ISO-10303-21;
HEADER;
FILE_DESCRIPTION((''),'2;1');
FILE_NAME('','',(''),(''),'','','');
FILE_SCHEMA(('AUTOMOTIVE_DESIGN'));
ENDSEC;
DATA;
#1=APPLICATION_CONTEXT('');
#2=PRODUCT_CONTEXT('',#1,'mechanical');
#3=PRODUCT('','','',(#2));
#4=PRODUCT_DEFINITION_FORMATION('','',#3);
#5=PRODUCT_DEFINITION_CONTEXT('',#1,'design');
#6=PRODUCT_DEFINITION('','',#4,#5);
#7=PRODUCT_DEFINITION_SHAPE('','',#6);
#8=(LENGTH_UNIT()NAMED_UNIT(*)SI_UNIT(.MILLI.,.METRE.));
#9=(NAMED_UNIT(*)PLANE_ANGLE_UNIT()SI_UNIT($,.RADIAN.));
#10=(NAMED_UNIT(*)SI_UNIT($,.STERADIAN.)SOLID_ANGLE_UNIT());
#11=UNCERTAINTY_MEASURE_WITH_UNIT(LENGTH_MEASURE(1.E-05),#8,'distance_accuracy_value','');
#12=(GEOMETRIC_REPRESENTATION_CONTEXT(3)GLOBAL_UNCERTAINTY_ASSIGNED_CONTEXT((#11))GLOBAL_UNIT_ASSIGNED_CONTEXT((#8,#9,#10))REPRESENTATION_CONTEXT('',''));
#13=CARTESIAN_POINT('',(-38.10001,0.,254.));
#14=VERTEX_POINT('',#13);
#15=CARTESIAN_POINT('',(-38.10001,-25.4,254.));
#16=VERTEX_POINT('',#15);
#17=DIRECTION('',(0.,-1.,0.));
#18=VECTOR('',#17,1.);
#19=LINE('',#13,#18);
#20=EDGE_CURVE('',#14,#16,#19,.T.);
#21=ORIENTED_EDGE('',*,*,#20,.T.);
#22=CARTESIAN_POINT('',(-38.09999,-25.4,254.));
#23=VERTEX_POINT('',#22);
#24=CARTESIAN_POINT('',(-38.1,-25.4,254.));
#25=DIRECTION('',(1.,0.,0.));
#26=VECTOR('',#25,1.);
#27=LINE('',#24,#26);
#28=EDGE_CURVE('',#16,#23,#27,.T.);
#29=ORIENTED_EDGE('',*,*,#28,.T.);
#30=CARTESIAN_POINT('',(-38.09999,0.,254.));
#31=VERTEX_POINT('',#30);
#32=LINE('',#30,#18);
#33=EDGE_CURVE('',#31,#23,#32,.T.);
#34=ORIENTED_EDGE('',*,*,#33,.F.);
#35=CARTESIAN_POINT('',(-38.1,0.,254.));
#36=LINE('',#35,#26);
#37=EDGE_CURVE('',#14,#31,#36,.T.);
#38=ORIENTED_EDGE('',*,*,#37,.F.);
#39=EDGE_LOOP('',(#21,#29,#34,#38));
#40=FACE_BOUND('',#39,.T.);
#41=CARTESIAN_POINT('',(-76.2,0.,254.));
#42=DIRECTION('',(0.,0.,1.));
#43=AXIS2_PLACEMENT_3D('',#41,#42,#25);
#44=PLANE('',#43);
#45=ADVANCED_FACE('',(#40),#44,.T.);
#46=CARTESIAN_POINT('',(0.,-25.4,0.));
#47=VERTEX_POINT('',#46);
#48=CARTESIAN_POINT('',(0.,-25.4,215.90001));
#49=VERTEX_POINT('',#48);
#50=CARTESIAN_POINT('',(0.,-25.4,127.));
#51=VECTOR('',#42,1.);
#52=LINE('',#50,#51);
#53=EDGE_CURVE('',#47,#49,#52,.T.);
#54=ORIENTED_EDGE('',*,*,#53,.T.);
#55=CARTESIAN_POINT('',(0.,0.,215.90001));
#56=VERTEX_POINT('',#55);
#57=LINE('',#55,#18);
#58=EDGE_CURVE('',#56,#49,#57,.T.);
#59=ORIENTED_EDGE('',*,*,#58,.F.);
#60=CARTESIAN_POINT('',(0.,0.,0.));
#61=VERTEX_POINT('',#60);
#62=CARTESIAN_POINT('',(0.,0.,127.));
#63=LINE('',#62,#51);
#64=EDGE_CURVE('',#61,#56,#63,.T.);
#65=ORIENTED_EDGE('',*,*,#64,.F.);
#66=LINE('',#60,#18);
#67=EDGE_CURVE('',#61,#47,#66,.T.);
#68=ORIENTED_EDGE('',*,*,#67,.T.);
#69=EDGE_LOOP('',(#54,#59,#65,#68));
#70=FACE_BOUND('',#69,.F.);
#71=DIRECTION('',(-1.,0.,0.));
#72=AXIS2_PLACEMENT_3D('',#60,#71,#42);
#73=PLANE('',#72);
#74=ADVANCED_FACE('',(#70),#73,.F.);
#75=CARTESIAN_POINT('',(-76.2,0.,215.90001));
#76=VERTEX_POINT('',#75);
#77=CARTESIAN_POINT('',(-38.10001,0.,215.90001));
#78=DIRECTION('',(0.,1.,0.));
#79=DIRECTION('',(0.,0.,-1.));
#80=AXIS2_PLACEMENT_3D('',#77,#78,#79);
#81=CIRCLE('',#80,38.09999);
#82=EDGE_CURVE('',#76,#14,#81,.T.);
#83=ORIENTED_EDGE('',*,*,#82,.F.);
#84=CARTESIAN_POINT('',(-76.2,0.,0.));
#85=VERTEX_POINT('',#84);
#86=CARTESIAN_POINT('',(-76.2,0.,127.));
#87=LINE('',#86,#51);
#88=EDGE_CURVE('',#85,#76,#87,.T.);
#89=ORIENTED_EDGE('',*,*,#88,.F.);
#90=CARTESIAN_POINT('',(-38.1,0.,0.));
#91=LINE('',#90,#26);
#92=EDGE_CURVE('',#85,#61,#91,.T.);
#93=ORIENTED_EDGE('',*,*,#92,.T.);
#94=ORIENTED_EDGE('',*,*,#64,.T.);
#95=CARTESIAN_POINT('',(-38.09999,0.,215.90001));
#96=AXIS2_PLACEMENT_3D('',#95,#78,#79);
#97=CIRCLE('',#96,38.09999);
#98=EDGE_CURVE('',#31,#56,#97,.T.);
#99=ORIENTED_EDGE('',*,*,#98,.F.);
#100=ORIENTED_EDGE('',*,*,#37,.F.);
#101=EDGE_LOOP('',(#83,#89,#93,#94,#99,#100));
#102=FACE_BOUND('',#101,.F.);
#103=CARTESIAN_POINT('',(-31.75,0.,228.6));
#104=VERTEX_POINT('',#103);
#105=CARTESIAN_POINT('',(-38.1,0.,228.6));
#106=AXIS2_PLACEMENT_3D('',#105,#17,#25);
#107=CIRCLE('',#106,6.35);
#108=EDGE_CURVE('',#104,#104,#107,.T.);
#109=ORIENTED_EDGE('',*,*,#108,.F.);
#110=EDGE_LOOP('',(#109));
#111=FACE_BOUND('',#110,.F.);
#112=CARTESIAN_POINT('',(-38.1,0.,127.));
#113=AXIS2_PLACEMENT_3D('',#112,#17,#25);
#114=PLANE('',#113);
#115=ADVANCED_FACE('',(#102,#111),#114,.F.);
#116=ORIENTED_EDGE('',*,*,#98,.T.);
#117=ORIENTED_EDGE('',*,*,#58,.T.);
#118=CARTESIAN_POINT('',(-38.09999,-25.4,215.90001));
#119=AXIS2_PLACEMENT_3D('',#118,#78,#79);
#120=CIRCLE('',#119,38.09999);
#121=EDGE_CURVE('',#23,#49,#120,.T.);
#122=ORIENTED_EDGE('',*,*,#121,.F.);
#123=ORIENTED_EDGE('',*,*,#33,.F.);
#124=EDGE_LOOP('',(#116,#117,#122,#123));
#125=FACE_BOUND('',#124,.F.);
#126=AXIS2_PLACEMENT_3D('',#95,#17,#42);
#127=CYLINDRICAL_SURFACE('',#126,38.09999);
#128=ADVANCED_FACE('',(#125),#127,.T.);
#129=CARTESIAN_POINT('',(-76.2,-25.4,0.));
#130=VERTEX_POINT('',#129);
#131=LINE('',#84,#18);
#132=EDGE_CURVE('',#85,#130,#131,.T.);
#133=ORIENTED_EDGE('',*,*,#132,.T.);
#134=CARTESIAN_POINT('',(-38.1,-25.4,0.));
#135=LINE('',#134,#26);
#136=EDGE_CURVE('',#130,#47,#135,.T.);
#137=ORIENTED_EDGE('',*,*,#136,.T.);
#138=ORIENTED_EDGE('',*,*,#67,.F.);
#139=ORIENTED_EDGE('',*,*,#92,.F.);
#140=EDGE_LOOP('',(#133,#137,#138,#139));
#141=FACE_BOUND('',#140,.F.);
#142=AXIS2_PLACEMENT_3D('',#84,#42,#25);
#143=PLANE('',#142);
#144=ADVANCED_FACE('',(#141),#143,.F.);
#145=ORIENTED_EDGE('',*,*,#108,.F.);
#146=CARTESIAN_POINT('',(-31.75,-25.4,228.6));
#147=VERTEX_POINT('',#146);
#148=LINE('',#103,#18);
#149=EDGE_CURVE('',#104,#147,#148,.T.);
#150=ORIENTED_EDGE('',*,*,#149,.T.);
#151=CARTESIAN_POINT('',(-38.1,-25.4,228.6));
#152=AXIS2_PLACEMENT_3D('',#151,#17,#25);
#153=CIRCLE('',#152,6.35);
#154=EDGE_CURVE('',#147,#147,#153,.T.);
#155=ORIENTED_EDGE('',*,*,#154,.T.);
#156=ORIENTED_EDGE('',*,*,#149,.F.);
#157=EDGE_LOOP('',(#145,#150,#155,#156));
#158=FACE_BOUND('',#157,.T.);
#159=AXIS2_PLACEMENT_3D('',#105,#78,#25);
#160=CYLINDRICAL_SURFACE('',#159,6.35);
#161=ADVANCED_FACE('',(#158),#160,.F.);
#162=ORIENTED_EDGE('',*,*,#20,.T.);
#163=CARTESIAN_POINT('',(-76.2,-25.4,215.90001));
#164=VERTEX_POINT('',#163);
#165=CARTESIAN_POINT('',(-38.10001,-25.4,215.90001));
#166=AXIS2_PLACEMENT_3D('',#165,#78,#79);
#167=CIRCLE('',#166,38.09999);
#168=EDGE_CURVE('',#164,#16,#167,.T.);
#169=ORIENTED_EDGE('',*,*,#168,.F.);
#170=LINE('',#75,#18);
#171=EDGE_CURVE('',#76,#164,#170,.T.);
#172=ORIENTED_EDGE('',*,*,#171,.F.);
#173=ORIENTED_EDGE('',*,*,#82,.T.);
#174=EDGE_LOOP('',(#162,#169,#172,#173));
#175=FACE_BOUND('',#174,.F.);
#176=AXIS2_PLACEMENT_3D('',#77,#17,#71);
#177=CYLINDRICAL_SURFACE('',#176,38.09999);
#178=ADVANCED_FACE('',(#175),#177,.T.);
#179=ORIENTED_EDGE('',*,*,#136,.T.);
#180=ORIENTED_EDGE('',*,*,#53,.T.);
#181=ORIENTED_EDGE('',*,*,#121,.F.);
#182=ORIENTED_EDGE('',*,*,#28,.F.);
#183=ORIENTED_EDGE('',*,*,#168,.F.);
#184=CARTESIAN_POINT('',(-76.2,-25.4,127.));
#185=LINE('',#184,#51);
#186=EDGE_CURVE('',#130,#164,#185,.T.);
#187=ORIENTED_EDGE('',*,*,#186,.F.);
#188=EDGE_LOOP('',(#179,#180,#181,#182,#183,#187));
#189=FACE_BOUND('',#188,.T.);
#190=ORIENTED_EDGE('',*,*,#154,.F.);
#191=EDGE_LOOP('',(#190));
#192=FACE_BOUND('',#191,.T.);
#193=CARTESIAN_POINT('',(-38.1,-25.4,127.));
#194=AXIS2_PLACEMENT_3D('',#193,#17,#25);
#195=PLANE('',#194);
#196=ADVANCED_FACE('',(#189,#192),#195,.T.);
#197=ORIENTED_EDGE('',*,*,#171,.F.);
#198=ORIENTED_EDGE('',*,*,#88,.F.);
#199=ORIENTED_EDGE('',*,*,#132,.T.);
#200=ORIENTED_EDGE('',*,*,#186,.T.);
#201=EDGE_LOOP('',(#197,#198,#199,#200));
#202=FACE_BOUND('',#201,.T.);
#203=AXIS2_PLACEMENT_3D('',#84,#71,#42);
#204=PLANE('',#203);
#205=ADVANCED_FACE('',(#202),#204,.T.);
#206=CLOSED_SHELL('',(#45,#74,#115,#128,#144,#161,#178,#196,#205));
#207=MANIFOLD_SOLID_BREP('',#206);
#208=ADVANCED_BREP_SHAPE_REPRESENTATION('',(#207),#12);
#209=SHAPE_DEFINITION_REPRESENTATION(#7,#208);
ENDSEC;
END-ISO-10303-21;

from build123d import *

# Parameters (mm, degrees)
F0_W     = 76.2
F0_H     = 254
F0_R     = 6.35
F1_DEPTH = 25.4
F2_R     = 38.09999


# Not quite as in the source:
# - a fillet or chamfer is up to 0.001 mm smaller than in the source, because OpenCascade refuses the exact size


with BuildPart() as f1:
    # F0 (on Front) → F1 (new body)
    with BuildSketch(Plane.XZ):
        with Locations((-38.1, 127)):
            Rectangle(F0_W, F0_H)
        with Locations((-38.1, 228.6)):
            Circle(F0_R, mode=Mode.SUBTRACT)
    extrude(amount=F1_DEPTH)

    # F2 (radius 38.1 in the source; OpenCascade refuses exactly that, so slightly less here)
    f2_edges = [f1.edges().sort_by_distance(p)[0] for p in [
        (-76.2, -12.7, 254),
        (0, -12.7, 254),
    ]]
    fillet(f2_edges, radius=F2_R)


solid = f1.part
